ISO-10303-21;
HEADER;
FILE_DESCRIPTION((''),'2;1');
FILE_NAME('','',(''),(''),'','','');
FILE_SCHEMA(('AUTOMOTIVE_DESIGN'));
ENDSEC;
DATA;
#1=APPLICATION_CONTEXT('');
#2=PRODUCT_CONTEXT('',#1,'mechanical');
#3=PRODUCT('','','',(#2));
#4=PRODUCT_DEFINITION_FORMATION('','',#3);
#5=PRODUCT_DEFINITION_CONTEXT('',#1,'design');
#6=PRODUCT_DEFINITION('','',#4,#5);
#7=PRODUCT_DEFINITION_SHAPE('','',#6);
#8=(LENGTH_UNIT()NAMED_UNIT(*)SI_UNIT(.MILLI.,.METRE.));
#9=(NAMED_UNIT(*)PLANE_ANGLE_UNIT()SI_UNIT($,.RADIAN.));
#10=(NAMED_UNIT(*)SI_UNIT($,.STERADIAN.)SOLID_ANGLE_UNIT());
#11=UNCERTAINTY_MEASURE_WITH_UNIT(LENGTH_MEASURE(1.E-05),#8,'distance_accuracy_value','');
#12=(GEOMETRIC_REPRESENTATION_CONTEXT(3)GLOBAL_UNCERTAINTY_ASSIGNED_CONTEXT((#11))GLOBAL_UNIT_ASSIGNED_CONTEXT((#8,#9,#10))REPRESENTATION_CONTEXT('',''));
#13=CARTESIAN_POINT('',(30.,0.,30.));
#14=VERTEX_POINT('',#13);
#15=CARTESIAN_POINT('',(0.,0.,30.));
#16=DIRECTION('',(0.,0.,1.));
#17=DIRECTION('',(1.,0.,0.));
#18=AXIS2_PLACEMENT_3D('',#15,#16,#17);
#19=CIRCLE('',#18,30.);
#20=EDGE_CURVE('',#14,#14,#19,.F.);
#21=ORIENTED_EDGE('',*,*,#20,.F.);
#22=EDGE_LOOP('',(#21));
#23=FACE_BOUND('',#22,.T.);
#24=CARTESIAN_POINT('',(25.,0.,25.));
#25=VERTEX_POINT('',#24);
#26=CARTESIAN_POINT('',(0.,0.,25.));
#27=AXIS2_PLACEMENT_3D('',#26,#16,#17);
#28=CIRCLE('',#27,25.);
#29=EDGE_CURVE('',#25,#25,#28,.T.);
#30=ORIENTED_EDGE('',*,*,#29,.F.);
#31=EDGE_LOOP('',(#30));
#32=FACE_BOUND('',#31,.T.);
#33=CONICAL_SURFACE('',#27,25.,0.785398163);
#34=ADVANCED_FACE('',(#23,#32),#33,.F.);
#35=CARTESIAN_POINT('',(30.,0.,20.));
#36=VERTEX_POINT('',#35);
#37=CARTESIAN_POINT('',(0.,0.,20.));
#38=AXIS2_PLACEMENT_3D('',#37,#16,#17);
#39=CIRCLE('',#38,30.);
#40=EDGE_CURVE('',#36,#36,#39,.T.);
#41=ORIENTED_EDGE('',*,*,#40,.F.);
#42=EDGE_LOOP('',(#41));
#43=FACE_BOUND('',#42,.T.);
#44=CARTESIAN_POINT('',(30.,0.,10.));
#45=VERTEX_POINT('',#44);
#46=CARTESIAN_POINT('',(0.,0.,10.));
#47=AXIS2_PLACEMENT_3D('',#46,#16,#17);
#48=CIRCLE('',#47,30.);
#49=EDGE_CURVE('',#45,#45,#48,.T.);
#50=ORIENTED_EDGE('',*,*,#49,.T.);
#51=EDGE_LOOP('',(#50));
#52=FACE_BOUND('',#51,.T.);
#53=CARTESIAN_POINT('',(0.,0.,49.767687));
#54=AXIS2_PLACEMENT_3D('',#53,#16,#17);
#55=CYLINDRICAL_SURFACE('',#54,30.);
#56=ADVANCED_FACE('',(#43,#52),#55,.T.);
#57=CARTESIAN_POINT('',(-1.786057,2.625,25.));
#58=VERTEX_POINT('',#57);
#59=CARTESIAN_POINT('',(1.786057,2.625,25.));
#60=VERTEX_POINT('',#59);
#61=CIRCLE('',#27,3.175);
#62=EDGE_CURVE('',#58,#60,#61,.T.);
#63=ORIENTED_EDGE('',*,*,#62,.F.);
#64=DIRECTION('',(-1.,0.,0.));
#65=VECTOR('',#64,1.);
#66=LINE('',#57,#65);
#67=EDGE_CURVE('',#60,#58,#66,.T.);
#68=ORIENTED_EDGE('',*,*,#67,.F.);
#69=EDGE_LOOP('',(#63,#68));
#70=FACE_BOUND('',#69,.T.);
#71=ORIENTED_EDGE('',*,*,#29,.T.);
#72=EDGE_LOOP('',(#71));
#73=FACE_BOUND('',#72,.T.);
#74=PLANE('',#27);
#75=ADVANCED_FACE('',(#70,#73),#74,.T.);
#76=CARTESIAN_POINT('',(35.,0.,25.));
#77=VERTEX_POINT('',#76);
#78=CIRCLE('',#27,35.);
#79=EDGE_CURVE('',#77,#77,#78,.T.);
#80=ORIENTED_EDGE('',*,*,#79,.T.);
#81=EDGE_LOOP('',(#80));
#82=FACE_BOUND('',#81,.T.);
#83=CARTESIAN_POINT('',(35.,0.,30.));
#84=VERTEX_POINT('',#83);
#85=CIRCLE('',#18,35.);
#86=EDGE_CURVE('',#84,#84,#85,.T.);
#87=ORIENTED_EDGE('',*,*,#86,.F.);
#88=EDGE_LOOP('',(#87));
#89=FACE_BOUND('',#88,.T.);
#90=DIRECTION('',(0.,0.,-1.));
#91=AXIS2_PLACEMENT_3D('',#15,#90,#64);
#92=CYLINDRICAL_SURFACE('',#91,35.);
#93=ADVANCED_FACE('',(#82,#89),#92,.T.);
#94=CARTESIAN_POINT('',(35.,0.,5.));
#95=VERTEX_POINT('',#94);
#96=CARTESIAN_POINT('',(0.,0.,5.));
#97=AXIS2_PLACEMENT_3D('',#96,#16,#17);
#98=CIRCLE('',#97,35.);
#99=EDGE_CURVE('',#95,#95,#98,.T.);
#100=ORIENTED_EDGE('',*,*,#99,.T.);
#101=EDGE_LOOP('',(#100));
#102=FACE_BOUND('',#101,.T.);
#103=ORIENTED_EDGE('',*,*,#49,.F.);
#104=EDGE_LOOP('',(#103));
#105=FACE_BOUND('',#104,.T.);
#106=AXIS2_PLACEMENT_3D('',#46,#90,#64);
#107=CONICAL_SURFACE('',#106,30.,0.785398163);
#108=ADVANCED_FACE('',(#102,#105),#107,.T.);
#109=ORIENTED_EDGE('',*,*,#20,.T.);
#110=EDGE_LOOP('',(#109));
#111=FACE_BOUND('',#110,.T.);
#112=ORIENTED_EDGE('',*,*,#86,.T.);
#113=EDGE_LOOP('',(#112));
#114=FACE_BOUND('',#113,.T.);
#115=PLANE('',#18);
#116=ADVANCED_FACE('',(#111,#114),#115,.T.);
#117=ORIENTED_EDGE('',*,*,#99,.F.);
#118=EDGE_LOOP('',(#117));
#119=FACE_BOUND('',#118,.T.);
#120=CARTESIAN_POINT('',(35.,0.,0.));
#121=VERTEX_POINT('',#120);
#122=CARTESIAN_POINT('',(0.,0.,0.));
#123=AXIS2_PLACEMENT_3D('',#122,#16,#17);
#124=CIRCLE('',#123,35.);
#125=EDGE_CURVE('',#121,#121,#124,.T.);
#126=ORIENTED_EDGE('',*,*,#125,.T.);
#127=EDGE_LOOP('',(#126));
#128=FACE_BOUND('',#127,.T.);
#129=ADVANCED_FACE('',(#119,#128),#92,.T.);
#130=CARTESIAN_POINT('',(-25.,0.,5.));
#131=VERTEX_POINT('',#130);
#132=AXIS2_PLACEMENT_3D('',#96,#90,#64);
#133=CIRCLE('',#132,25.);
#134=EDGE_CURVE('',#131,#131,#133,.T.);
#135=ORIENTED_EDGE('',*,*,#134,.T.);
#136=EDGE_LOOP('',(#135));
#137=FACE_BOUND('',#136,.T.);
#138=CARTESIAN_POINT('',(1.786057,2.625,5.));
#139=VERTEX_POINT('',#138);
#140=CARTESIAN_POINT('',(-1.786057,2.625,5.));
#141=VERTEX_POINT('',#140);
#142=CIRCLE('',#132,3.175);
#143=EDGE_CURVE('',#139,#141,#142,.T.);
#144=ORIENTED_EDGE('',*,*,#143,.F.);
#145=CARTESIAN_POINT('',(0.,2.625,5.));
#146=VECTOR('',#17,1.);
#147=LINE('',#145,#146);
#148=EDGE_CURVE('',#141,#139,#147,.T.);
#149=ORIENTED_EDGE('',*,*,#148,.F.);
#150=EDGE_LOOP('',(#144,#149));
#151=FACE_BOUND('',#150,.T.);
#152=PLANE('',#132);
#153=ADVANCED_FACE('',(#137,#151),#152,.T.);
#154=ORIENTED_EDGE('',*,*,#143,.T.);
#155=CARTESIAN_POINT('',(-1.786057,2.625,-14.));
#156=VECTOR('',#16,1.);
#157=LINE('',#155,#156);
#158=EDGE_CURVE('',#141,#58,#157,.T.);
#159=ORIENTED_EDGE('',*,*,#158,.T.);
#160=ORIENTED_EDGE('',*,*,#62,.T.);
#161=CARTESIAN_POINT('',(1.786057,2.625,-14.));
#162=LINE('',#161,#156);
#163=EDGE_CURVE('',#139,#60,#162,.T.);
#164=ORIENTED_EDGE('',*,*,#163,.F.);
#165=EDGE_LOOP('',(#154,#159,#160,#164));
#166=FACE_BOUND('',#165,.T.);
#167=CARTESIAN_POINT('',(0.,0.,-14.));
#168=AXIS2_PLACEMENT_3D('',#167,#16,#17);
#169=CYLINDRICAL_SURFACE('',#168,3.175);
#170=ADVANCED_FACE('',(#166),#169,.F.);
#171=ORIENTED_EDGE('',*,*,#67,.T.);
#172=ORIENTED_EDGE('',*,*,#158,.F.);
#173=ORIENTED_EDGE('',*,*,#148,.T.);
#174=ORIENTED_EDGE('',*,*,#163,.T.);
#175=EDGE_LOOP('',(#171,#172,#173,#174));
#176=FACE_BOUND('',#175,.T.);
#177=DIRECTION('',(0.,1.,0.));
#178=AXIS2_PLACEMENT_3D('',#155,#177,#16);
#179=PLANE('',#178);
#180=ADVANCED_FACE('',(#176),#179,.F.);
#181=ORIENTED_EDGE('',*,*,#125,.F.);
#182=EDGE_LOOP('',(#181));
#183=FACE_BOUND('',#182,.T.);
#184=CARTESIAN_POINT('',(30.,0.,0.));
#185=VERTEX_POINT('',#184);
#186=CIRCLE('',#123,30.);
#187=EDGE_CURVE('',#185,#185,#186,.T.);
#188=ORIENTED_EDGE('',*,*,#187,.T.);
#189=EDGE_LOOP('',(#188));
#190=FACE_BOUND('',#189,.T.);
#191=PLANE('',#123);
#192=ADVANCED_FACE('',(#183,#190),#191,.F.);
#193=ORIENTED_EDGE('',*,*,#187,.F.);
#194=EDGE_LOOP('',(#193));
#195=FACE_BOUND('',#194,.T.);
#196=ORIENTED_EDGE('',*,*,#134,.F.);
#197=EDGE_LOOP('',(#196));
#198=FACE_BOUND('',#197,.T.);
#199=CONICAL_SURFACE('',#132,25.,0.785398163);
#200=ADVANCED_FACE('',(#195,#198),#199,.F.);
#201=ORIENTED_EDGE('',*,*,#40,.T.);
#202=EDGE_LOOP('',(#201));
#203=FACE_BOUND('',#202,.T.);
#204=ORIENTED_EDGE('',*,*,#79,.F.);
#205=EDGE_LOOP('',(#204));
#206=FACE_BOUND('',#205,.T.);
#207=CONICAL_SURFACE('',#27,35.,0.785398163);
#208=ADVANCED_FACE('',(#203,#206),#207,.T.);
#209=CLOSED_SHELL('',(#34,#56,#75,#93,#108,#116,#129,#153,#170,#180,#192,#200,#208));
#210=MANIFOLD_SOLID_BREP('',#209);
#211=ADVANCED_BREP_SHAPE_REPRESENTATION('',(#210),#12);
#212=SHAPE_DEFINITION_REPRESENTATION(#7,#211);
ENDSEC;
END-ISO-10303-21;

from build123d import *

# Parameters (mm, degrees)
SKETCH1_R           = 35
BOSS_EXTRUDE1_DEPTH = 30
SKETCH3_R           = 25
CUT_EXTRUDE1_DEPTH  = 5
CUT_EXTRUDE2_START  = -5
SKETCH4_R           = 25
CUT_EXTRUDE2_DEPTH  = 5
CUT_EXTRUDE3_DEPTH  = 39
CHAMFER2_SIZE       = 5


with BuildPart() as part:
    # Sketch1 → Boss-Extrude1 (new body)
    with BuildSketch(Plane.XY):
        Circle(SKETCH1_R)
    extrude(amount=BOSS_EXTRUDE1_DEPTH)

    # Sketch3 → Cut-Extrude1 (cut)
    with BuildSketch(Plane.XY.offset(30)):
        Circle(SKETCH3_R)
    extrude(amount=-CUT_EXTRUDE1_DEPTH, mode=Mode.SUBTRACT)

    # Sketch4 → Cut-Extrude2 (cut)
    with BuildSketch(Plane(origin=(0, 0, 0), x_dir=(-1, 0, 0), z_dir=(0, 0, -1)).offset(CUT_EXTRUDE2_START)):
        with Locations(Location((0, 0, 0), (0, 0, 180))):
            Circle(SKETCH4_R)
    extrude(amount=CUT_EXTRUDE2_DEPTH, mode=Mode.SUBTRACT)

    # Sketch5 → Cut-Revolve1 (revolve, cut)
    with BuildSketch(Plane(origin=(0, 0, 0), x_dir=(0, 0, -1), z_dir=(1, 0, 0)), mode=Mode.PRIVATE) as cut_revolve1_sk:
        Polygon((-25, 35), (-20, 30), (-10, 30), (-5, 35), align=None)
    revolve(cut_revolve1_sk.sketch.rotate(Axis((0, 0, 49.767686579), (0, 0, -1)), 90), axis=Axis((0, 0, 49.767686579), (0, 0, -1)), mode=Mode.SUBTRACT)

    # Sketch6 → Cut-Extrude3 (cut)
    with BuildSketch(Plane.XY.offset(25)):
        with BuildLine():
            Line((-1.78605711, 2.625), (1.78605711, 2.625))
            ThreePointArc((1.78605711, 2.625), (0, -3.175), (-1.78605711, 2.625))
        make_face()
    extrude(amount=-CUT_EXTRUDE3_DEPTH, mode=Mode.SUBTRACT)

    # Chamfer2
    chamfer2_edges = [part.edges().sort_by_distance(p)[0] for p in [
        (-25, 0, 0),
        (-25, 0, 30),
    ]]
    chamfer(chamfer2_edges, length=CHAMFER2_SIZE - 0.0001)  # a hair under: the kernel refuses the full size


solid = part.part
